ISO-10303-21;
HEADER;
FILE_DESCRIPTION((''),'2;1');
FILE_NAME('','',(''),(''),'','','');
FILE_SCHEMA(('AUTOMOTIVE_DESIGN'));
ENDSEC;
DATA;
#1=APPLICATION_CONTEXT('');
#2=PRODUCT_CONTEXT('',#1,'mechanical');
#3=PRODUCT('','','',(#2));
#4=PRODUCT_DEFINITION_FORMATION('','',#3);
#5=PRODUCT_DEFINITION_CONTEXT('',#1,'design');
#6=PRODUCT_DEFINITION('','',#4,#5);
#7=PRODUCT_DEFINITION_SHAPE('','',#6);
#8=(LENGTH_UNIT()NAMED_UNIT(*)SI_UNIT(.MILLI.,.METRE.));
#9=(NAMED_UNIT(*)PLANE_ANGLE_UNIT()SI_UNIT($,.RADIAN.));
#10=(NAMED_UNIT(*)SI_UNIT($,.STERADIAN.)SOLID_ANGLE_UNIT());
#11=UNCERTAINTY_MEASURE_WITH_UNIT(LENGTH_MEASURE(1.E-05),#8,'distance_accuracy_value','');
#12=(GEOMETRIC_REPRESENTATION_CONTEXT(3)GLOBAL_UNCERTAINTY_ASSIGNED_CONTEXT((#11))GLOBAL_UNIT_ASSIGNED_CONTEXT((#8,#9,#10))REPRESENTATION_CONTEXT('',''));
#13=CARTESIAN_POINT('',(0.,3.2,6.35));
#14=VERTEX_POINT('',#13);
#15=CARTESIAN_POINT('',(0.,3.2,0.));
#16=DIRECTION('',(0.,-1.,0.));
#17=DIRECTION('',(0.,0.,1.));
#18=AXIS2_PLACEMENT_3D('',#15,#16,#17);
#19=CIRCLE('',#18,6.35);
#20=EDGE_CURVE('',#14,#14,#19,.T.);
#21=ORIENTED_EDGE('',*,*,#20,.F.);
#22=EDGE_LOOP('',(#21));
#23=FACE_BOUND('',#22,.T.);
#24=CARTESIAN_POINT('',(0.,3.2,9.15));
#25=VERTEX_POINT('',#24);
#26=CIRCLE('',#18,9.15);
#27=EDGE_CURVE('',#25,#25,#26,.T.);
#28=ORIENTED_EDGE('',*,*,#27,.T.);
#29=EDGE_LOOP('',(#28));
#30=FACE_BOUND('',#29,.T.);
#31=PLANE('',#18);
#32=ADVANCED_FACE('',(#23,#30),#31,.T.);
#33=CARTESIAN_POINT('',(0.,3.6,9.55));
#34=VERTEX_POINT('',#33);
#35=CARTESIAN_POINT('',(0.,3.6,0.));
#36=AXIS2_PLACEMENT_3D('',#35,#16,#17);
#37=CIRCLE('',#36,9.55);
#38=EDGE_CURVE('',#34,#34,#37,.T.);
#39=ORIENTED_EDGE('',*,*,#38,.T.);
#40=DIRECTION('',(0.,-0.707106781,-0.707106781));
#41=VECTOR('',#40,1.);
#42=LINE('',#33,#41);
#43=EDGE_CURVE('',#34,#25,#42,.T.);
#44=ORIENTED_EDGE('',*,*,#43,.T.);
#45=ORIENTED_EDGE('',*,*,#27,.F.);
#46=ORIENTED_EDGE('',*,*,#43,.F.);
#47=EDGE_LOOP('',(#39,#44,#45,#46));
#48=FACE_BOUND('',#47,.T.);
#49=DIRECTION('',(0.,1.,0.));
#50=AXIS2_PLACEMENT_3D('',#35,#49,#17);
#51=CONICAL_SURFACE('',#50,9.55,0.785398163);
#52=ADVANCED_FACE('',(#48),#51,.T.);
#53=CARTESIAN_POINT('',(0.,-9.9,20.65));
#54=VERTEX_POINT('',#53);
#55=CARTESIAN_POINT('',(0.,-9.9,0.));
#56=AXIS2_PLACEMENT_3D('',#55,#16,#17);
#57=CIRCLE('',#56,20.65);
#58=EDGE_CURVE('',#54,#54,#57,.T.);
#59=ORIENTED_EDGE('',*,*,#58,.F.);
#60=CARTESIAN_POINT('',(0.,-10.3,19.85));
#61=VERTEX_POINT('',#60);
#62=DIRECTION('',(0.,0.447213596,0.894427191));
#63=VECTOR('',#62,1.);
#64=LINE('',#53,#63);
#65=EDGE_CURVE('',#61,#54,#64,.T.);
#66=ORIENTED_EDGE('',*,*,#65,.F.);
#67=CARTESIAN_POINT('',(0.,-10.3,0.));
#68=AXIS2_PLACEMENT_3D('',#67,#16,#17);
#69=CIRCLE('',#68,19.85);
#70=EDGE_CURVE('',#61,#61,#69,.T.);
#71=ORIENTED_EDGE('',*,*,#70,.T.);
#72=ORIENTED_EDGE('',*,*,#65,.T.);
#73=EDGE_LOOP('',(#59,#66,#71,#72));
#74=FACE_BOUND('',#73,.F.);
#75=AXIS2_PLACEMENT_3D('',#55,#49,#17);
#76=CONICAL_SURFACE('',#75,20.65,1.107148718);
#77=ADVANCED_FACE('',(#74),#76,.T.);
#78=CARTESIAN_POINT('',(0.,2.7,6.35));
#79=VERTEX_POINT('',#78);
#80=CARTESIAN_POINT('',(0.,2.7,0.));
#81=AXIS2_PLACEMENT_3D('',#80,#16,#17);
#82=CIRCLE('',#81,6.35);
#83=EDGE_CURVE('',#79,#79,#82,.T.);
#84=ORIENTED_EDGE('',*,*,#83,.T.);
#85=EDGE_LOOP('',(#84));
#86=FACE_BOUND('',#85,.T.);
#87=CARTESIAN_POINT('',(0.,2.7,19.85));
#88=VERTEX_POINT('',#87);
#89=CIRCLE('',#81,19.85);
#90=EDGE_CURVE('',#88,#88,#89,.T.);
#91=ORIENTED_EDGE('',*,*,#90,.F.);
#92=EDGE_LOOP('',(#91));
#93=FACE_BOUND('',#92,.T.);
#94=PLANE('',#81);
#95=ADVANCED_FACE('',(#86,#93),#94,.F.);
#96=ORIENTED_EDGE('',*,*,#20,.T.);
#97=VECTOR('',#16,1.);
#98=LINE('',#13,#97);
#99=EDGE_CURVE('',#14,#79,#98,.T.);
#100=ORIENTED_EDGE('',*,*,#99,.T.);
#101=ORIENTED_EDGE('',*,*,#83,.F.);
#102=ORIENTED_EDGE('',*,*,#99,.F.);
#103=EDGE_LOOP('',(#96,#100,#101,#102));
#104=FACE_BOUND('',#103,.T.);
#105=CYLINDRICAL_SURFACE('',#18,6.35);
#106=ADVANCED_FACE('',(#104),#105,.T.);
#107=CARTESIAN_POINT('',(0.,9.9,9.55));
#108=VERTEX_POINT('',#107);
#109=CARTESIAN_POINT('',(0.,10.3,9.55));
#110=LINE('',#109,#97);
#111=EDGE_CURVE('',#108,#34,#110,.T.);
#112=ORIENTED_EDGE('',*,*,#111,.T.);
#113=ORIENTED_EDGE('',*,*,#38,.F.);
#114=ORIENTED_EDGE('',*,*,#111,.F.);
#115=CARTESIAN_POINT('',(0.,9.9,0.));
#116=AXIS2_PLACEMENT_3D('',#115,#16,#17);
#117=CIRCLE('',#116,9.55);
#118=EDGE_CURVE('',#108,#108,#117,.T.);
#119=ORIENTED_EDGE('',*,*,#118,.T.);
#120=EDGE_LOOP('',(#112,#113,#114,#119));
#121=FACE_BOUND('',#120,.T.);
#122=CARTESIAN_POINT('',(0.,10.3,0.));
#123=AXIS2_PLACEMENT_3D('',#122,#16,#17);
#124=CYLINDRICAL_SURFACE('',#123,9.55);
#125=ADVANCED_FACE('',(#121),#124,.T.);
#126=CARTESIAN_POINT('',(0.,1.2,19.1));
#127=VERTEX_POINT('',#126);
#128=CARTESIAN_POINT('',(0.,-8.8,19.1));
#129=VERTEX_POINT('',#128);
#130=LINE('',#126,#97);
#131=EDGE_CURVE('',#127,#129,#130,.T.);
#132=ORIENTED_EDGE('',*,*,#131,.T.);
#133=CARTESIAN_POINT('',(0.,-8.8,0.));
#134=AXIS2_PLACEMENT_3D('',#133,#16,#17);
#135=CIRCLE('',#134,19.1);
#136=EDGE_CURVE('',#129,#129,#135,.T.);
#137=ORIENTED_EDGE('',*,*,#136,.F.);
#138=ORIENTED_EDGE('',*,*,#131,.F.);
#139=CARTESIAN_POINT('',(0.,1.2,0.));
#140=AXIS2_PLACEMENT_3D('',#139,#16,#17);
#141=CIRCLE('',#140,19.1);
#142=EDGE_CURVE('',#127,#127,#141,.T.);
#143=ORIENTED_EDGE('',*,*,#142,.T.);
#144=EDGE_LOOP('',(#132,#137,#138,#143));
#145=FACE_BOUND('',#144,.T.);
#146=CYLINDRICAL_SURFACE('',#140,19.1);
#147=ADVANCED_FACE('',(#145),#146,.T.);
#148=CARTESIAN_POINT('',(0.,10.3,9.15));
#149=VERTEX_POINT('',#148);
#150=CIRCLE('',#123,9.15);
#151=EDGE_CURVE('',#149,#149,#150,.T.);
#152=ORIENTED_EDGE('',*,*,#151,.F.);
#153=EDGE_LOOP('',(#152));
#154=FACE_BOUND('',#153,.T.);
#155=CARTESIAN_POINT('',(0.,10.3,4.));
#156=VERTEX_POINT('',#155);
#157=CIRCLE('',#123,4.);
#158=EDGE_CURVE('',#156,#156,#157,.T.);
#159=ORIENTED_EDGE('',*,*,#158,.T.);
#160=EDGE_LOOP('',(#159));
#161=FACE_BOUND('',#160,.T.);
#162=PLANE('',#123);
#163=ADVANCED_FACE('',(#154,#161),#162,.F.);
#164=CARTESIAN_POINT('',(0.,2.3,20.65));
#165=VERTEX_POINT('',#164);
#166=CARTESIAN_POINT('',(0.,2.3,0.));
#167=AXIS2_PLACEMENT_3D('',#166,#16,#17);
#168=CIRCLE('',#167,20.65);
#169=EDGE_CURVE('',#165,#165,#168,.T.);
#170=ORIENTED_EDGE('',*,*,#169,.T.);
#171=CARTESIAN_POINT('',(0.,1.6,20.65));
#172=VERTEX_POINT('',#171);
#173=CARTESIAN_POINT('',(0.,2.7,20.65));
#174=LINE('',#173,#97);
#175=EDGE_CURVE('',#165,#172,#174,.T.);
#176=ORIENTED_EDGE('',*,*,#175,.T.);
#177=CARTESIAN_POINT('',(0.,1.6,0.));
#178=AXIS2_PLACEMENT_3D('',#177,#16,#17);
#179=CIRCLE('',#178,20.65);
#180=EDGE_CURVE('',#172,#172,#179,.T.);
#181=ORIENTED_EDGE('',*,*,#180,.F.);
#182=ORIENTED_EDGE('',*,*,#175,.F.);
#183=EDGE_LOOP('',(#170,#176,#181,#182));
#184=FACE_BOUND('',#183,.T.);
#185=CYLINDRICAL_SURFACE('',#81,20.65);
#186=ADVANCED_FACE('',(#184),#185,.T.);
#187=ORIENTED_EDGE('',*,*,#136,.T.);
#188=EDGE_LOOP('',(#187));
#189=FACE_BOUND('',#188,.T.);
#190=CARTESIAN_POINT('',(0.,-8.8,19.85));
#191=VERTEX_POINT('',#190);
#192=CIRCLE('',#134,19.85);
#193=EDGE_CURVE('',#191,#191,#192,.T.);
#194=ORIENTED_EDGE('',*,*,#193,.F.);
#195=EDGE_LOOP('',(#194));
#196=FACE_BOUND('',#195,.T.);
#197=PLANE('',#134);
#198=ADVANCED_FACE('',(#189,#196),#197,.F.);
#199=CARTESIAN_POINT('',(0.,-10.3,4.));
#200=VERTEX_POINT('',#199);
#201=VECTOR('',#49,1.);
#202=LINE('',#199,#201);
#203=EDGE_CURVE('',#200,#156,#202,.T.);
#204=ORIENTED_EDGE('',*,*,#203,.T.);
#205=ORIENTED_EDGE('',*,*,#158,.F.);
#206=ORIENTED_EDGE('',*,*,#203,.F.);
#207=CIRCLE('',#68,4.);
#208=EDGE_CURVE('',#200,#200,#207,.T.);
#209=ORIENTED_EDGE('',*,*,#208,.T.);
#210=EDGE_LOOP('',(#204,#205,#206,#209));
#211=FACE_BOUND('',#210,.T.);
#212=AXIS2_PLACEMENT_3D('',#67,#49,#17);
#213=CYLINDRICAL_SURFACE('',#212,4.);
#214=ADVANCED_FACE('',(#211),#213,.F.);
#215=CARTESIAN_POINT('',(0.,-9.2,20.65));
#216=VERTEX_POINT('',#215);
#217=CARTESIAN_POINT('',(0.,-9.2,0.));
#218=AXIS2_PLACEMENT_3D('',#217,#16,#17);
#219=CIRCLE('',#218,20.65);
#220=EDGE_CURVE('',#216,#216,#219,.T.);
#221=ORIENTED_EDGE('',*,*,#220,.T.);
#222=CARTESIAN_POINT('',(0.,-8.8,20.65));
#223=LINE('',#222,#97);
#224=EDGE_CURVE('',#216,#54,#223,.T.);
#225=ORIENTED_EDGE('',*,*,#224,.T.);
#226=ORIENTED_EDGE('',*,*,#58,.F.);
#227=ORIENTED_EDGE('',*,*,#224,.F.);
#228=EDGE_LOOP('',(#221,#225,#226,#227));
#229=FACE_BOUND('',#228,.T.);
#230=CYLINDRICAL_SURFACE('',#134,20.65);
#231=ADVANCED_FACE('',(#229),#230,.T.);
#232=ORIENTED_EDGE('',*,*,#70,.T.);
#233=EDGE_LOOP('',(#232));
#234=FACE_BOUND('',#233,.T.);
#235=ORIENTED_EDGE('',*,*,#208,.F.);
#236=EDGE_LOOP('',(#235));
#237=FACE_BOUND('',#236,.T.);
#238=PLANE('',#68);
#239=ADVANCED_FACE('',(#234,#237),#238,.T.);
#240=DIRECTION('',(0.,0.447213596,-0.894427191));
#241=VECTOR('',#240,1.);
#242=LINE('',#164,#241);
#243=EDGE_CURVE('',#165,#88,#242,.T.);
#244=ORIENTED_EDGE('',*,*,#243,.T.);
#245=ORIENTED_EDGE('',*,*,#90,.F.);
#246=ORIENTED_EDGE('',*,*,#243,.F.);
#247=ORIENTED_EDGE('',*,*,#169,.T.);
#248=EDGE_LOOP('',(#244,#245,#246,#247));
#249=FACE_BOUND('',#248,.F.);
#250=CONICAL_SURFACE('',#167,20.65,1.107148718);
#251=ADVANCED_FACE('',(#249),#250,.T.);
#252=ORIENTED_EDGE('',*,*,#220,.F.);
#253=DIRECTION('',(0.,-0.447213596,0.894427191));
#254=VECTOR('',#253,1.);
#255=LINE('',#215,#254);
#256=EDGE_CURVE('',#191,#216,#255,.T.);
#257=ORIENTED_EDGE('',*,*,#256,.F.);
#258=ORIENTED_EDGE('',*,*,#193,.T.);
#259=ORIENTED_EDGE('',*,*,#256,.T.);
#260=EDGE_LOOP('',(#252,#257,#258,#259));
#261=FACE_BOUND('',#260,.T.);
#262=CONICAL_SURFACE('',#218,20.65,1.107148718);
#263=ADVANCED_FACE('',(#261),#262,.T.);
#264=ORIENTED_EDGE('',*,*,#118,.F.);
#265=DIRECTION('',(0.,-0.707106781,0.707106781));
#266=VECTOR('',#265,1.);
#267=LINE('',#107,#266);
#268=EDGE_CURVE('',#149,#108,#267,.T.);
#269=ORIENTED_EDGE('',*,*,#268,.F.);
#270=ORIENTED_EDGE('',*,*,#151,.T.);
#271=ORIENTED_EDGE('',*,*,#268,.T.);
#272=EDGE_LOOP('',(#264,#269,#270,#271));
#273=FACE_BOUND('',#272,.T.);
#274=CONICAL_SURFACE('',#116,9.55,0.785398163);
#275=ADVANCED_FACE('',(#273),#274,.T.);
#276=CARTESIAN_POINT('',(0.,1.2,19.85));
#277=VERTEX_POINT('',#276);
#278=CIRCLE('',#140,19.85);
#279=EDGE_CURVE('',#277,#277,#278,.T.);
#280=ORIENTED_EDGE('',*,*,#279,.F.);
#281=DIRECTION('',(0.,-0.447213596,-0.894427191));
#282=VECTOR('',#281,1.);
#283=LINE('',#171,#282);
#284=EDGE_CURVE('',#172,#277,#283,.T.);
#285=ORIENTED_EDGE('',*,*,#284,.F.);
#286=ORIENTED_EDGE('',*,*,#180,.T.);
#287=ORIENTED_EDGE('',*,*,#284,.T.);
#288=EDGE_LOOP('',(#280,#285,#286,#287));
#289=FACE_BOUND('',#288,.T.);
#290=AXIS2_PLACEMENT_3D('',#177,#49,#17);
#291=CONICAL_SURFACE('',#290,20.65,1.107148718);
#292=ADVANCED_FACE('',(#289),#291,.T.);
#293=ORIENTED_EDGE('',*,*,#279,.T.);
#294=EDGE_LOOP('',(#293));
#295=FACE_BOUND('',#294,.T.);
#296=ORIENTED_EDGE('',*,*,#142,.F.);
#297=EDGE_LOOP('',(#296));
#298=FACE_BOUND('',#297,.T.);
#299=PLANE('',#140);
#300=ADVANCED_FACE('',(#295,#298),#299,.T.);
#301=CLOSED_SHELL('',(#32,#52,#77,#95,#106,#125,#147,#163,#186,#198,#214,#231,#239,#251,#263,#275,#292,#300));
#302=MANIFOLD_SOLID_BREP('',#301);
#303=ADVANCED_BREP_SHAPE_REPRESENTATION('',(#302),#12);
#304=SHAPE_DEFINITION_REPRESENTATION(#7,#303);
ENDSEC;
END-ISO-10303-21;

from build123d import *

# Parameters (mm, degrees)
F2_C1_SIZE2 = 0.4
F2_C1_SIZE  = 0.8
F2_C2_SIZE2 = 0.8
F2_C2_SIZE  = 0.4
F2_C3_SIZE2 = 0.8
F2_C3_SIZE  = 0.4
F3_SIZE2    = 0.4
F3_SIZE     = 0.8
F4_SIZE     = 0.4


with BuildPart() as f1:
    # F0 (on Right) → F1 (revolve)
    with BuildSketch(Plane.YZ):
        Polygon((-10.3, 20.65), (-10.3, 4), (10.3, 4), (10.3, 9.55), (3.2, 9.55), (3.2, 6.35), (2.7, 6.35), (2.7, 20.65), (1.2, 20.65), (1.2, 19.1), (-8.8, 19.1), (-8.8, 20.65), align=None)
    revolve(axis=Axis((0, -3.1587743408, 0), (0, -1, 0)))

    # F2: chamfer of 0.4 x 0.8 on 3 edges, made by hand

    # F2_c1
    f2_c1_edges = [f1.edges().sort_by_distance(p)[0] for p in [
        (0, -10.3, -20.65),
    ]]
    f2_c1_side = f1.faces().sort_by_distance((0, -10.3, -20.642))[0]
    chamfer(f2_c1_edges, length=F2_C1_SIZE, length2=F2_C1_SIZE2, reference=f2_c1_side)

    # F2_c2
    f2_c2_edges = [f1.edges().sort_by_distance(p)[0] for p in [
        (0, 2.7, -20.65),
    ]]
    f2_c2_side = f1.faces().sort_by_distance((0, 2.692, -20.65))[0]
    chamfer(f2_c2_edges, length=F2_C2_SIZE, length2=F2_C2_SIZE2, reference=f2_c2_side)

    # F2_c3
    f2_c3_edges = [f1.edges().sort_by_distance(p)[0] for p in [
        (0, 1.2, -20.65),
    ]]
    f2_c3_side = f1.faces().sort_by_distance((0, 1.208, -20.65))[0]
    chamfer(f2_c3_edges, length=F2_C3_SIZE, length2=F2_C3_SIZE2, reference=f2_c3_side)

    # F3
    f3_edges = [f1.edges().sort_by_distance(p)[0] for p in [
        (0, -8.8, -20.65),
    ]]
    chamfer(f3_edges, length=F3_SIZE, length2=F3_SIZE2)

    # F4
    f4_edges = [f1.edges().sort_by_distance(p)[0] for p in [
        (0, 3.2, -9.55),
        (0, 10.3, -9.55),
    ]]
    chamfer(f4_edges, length=F4_SIZE)


solid = f1.part
